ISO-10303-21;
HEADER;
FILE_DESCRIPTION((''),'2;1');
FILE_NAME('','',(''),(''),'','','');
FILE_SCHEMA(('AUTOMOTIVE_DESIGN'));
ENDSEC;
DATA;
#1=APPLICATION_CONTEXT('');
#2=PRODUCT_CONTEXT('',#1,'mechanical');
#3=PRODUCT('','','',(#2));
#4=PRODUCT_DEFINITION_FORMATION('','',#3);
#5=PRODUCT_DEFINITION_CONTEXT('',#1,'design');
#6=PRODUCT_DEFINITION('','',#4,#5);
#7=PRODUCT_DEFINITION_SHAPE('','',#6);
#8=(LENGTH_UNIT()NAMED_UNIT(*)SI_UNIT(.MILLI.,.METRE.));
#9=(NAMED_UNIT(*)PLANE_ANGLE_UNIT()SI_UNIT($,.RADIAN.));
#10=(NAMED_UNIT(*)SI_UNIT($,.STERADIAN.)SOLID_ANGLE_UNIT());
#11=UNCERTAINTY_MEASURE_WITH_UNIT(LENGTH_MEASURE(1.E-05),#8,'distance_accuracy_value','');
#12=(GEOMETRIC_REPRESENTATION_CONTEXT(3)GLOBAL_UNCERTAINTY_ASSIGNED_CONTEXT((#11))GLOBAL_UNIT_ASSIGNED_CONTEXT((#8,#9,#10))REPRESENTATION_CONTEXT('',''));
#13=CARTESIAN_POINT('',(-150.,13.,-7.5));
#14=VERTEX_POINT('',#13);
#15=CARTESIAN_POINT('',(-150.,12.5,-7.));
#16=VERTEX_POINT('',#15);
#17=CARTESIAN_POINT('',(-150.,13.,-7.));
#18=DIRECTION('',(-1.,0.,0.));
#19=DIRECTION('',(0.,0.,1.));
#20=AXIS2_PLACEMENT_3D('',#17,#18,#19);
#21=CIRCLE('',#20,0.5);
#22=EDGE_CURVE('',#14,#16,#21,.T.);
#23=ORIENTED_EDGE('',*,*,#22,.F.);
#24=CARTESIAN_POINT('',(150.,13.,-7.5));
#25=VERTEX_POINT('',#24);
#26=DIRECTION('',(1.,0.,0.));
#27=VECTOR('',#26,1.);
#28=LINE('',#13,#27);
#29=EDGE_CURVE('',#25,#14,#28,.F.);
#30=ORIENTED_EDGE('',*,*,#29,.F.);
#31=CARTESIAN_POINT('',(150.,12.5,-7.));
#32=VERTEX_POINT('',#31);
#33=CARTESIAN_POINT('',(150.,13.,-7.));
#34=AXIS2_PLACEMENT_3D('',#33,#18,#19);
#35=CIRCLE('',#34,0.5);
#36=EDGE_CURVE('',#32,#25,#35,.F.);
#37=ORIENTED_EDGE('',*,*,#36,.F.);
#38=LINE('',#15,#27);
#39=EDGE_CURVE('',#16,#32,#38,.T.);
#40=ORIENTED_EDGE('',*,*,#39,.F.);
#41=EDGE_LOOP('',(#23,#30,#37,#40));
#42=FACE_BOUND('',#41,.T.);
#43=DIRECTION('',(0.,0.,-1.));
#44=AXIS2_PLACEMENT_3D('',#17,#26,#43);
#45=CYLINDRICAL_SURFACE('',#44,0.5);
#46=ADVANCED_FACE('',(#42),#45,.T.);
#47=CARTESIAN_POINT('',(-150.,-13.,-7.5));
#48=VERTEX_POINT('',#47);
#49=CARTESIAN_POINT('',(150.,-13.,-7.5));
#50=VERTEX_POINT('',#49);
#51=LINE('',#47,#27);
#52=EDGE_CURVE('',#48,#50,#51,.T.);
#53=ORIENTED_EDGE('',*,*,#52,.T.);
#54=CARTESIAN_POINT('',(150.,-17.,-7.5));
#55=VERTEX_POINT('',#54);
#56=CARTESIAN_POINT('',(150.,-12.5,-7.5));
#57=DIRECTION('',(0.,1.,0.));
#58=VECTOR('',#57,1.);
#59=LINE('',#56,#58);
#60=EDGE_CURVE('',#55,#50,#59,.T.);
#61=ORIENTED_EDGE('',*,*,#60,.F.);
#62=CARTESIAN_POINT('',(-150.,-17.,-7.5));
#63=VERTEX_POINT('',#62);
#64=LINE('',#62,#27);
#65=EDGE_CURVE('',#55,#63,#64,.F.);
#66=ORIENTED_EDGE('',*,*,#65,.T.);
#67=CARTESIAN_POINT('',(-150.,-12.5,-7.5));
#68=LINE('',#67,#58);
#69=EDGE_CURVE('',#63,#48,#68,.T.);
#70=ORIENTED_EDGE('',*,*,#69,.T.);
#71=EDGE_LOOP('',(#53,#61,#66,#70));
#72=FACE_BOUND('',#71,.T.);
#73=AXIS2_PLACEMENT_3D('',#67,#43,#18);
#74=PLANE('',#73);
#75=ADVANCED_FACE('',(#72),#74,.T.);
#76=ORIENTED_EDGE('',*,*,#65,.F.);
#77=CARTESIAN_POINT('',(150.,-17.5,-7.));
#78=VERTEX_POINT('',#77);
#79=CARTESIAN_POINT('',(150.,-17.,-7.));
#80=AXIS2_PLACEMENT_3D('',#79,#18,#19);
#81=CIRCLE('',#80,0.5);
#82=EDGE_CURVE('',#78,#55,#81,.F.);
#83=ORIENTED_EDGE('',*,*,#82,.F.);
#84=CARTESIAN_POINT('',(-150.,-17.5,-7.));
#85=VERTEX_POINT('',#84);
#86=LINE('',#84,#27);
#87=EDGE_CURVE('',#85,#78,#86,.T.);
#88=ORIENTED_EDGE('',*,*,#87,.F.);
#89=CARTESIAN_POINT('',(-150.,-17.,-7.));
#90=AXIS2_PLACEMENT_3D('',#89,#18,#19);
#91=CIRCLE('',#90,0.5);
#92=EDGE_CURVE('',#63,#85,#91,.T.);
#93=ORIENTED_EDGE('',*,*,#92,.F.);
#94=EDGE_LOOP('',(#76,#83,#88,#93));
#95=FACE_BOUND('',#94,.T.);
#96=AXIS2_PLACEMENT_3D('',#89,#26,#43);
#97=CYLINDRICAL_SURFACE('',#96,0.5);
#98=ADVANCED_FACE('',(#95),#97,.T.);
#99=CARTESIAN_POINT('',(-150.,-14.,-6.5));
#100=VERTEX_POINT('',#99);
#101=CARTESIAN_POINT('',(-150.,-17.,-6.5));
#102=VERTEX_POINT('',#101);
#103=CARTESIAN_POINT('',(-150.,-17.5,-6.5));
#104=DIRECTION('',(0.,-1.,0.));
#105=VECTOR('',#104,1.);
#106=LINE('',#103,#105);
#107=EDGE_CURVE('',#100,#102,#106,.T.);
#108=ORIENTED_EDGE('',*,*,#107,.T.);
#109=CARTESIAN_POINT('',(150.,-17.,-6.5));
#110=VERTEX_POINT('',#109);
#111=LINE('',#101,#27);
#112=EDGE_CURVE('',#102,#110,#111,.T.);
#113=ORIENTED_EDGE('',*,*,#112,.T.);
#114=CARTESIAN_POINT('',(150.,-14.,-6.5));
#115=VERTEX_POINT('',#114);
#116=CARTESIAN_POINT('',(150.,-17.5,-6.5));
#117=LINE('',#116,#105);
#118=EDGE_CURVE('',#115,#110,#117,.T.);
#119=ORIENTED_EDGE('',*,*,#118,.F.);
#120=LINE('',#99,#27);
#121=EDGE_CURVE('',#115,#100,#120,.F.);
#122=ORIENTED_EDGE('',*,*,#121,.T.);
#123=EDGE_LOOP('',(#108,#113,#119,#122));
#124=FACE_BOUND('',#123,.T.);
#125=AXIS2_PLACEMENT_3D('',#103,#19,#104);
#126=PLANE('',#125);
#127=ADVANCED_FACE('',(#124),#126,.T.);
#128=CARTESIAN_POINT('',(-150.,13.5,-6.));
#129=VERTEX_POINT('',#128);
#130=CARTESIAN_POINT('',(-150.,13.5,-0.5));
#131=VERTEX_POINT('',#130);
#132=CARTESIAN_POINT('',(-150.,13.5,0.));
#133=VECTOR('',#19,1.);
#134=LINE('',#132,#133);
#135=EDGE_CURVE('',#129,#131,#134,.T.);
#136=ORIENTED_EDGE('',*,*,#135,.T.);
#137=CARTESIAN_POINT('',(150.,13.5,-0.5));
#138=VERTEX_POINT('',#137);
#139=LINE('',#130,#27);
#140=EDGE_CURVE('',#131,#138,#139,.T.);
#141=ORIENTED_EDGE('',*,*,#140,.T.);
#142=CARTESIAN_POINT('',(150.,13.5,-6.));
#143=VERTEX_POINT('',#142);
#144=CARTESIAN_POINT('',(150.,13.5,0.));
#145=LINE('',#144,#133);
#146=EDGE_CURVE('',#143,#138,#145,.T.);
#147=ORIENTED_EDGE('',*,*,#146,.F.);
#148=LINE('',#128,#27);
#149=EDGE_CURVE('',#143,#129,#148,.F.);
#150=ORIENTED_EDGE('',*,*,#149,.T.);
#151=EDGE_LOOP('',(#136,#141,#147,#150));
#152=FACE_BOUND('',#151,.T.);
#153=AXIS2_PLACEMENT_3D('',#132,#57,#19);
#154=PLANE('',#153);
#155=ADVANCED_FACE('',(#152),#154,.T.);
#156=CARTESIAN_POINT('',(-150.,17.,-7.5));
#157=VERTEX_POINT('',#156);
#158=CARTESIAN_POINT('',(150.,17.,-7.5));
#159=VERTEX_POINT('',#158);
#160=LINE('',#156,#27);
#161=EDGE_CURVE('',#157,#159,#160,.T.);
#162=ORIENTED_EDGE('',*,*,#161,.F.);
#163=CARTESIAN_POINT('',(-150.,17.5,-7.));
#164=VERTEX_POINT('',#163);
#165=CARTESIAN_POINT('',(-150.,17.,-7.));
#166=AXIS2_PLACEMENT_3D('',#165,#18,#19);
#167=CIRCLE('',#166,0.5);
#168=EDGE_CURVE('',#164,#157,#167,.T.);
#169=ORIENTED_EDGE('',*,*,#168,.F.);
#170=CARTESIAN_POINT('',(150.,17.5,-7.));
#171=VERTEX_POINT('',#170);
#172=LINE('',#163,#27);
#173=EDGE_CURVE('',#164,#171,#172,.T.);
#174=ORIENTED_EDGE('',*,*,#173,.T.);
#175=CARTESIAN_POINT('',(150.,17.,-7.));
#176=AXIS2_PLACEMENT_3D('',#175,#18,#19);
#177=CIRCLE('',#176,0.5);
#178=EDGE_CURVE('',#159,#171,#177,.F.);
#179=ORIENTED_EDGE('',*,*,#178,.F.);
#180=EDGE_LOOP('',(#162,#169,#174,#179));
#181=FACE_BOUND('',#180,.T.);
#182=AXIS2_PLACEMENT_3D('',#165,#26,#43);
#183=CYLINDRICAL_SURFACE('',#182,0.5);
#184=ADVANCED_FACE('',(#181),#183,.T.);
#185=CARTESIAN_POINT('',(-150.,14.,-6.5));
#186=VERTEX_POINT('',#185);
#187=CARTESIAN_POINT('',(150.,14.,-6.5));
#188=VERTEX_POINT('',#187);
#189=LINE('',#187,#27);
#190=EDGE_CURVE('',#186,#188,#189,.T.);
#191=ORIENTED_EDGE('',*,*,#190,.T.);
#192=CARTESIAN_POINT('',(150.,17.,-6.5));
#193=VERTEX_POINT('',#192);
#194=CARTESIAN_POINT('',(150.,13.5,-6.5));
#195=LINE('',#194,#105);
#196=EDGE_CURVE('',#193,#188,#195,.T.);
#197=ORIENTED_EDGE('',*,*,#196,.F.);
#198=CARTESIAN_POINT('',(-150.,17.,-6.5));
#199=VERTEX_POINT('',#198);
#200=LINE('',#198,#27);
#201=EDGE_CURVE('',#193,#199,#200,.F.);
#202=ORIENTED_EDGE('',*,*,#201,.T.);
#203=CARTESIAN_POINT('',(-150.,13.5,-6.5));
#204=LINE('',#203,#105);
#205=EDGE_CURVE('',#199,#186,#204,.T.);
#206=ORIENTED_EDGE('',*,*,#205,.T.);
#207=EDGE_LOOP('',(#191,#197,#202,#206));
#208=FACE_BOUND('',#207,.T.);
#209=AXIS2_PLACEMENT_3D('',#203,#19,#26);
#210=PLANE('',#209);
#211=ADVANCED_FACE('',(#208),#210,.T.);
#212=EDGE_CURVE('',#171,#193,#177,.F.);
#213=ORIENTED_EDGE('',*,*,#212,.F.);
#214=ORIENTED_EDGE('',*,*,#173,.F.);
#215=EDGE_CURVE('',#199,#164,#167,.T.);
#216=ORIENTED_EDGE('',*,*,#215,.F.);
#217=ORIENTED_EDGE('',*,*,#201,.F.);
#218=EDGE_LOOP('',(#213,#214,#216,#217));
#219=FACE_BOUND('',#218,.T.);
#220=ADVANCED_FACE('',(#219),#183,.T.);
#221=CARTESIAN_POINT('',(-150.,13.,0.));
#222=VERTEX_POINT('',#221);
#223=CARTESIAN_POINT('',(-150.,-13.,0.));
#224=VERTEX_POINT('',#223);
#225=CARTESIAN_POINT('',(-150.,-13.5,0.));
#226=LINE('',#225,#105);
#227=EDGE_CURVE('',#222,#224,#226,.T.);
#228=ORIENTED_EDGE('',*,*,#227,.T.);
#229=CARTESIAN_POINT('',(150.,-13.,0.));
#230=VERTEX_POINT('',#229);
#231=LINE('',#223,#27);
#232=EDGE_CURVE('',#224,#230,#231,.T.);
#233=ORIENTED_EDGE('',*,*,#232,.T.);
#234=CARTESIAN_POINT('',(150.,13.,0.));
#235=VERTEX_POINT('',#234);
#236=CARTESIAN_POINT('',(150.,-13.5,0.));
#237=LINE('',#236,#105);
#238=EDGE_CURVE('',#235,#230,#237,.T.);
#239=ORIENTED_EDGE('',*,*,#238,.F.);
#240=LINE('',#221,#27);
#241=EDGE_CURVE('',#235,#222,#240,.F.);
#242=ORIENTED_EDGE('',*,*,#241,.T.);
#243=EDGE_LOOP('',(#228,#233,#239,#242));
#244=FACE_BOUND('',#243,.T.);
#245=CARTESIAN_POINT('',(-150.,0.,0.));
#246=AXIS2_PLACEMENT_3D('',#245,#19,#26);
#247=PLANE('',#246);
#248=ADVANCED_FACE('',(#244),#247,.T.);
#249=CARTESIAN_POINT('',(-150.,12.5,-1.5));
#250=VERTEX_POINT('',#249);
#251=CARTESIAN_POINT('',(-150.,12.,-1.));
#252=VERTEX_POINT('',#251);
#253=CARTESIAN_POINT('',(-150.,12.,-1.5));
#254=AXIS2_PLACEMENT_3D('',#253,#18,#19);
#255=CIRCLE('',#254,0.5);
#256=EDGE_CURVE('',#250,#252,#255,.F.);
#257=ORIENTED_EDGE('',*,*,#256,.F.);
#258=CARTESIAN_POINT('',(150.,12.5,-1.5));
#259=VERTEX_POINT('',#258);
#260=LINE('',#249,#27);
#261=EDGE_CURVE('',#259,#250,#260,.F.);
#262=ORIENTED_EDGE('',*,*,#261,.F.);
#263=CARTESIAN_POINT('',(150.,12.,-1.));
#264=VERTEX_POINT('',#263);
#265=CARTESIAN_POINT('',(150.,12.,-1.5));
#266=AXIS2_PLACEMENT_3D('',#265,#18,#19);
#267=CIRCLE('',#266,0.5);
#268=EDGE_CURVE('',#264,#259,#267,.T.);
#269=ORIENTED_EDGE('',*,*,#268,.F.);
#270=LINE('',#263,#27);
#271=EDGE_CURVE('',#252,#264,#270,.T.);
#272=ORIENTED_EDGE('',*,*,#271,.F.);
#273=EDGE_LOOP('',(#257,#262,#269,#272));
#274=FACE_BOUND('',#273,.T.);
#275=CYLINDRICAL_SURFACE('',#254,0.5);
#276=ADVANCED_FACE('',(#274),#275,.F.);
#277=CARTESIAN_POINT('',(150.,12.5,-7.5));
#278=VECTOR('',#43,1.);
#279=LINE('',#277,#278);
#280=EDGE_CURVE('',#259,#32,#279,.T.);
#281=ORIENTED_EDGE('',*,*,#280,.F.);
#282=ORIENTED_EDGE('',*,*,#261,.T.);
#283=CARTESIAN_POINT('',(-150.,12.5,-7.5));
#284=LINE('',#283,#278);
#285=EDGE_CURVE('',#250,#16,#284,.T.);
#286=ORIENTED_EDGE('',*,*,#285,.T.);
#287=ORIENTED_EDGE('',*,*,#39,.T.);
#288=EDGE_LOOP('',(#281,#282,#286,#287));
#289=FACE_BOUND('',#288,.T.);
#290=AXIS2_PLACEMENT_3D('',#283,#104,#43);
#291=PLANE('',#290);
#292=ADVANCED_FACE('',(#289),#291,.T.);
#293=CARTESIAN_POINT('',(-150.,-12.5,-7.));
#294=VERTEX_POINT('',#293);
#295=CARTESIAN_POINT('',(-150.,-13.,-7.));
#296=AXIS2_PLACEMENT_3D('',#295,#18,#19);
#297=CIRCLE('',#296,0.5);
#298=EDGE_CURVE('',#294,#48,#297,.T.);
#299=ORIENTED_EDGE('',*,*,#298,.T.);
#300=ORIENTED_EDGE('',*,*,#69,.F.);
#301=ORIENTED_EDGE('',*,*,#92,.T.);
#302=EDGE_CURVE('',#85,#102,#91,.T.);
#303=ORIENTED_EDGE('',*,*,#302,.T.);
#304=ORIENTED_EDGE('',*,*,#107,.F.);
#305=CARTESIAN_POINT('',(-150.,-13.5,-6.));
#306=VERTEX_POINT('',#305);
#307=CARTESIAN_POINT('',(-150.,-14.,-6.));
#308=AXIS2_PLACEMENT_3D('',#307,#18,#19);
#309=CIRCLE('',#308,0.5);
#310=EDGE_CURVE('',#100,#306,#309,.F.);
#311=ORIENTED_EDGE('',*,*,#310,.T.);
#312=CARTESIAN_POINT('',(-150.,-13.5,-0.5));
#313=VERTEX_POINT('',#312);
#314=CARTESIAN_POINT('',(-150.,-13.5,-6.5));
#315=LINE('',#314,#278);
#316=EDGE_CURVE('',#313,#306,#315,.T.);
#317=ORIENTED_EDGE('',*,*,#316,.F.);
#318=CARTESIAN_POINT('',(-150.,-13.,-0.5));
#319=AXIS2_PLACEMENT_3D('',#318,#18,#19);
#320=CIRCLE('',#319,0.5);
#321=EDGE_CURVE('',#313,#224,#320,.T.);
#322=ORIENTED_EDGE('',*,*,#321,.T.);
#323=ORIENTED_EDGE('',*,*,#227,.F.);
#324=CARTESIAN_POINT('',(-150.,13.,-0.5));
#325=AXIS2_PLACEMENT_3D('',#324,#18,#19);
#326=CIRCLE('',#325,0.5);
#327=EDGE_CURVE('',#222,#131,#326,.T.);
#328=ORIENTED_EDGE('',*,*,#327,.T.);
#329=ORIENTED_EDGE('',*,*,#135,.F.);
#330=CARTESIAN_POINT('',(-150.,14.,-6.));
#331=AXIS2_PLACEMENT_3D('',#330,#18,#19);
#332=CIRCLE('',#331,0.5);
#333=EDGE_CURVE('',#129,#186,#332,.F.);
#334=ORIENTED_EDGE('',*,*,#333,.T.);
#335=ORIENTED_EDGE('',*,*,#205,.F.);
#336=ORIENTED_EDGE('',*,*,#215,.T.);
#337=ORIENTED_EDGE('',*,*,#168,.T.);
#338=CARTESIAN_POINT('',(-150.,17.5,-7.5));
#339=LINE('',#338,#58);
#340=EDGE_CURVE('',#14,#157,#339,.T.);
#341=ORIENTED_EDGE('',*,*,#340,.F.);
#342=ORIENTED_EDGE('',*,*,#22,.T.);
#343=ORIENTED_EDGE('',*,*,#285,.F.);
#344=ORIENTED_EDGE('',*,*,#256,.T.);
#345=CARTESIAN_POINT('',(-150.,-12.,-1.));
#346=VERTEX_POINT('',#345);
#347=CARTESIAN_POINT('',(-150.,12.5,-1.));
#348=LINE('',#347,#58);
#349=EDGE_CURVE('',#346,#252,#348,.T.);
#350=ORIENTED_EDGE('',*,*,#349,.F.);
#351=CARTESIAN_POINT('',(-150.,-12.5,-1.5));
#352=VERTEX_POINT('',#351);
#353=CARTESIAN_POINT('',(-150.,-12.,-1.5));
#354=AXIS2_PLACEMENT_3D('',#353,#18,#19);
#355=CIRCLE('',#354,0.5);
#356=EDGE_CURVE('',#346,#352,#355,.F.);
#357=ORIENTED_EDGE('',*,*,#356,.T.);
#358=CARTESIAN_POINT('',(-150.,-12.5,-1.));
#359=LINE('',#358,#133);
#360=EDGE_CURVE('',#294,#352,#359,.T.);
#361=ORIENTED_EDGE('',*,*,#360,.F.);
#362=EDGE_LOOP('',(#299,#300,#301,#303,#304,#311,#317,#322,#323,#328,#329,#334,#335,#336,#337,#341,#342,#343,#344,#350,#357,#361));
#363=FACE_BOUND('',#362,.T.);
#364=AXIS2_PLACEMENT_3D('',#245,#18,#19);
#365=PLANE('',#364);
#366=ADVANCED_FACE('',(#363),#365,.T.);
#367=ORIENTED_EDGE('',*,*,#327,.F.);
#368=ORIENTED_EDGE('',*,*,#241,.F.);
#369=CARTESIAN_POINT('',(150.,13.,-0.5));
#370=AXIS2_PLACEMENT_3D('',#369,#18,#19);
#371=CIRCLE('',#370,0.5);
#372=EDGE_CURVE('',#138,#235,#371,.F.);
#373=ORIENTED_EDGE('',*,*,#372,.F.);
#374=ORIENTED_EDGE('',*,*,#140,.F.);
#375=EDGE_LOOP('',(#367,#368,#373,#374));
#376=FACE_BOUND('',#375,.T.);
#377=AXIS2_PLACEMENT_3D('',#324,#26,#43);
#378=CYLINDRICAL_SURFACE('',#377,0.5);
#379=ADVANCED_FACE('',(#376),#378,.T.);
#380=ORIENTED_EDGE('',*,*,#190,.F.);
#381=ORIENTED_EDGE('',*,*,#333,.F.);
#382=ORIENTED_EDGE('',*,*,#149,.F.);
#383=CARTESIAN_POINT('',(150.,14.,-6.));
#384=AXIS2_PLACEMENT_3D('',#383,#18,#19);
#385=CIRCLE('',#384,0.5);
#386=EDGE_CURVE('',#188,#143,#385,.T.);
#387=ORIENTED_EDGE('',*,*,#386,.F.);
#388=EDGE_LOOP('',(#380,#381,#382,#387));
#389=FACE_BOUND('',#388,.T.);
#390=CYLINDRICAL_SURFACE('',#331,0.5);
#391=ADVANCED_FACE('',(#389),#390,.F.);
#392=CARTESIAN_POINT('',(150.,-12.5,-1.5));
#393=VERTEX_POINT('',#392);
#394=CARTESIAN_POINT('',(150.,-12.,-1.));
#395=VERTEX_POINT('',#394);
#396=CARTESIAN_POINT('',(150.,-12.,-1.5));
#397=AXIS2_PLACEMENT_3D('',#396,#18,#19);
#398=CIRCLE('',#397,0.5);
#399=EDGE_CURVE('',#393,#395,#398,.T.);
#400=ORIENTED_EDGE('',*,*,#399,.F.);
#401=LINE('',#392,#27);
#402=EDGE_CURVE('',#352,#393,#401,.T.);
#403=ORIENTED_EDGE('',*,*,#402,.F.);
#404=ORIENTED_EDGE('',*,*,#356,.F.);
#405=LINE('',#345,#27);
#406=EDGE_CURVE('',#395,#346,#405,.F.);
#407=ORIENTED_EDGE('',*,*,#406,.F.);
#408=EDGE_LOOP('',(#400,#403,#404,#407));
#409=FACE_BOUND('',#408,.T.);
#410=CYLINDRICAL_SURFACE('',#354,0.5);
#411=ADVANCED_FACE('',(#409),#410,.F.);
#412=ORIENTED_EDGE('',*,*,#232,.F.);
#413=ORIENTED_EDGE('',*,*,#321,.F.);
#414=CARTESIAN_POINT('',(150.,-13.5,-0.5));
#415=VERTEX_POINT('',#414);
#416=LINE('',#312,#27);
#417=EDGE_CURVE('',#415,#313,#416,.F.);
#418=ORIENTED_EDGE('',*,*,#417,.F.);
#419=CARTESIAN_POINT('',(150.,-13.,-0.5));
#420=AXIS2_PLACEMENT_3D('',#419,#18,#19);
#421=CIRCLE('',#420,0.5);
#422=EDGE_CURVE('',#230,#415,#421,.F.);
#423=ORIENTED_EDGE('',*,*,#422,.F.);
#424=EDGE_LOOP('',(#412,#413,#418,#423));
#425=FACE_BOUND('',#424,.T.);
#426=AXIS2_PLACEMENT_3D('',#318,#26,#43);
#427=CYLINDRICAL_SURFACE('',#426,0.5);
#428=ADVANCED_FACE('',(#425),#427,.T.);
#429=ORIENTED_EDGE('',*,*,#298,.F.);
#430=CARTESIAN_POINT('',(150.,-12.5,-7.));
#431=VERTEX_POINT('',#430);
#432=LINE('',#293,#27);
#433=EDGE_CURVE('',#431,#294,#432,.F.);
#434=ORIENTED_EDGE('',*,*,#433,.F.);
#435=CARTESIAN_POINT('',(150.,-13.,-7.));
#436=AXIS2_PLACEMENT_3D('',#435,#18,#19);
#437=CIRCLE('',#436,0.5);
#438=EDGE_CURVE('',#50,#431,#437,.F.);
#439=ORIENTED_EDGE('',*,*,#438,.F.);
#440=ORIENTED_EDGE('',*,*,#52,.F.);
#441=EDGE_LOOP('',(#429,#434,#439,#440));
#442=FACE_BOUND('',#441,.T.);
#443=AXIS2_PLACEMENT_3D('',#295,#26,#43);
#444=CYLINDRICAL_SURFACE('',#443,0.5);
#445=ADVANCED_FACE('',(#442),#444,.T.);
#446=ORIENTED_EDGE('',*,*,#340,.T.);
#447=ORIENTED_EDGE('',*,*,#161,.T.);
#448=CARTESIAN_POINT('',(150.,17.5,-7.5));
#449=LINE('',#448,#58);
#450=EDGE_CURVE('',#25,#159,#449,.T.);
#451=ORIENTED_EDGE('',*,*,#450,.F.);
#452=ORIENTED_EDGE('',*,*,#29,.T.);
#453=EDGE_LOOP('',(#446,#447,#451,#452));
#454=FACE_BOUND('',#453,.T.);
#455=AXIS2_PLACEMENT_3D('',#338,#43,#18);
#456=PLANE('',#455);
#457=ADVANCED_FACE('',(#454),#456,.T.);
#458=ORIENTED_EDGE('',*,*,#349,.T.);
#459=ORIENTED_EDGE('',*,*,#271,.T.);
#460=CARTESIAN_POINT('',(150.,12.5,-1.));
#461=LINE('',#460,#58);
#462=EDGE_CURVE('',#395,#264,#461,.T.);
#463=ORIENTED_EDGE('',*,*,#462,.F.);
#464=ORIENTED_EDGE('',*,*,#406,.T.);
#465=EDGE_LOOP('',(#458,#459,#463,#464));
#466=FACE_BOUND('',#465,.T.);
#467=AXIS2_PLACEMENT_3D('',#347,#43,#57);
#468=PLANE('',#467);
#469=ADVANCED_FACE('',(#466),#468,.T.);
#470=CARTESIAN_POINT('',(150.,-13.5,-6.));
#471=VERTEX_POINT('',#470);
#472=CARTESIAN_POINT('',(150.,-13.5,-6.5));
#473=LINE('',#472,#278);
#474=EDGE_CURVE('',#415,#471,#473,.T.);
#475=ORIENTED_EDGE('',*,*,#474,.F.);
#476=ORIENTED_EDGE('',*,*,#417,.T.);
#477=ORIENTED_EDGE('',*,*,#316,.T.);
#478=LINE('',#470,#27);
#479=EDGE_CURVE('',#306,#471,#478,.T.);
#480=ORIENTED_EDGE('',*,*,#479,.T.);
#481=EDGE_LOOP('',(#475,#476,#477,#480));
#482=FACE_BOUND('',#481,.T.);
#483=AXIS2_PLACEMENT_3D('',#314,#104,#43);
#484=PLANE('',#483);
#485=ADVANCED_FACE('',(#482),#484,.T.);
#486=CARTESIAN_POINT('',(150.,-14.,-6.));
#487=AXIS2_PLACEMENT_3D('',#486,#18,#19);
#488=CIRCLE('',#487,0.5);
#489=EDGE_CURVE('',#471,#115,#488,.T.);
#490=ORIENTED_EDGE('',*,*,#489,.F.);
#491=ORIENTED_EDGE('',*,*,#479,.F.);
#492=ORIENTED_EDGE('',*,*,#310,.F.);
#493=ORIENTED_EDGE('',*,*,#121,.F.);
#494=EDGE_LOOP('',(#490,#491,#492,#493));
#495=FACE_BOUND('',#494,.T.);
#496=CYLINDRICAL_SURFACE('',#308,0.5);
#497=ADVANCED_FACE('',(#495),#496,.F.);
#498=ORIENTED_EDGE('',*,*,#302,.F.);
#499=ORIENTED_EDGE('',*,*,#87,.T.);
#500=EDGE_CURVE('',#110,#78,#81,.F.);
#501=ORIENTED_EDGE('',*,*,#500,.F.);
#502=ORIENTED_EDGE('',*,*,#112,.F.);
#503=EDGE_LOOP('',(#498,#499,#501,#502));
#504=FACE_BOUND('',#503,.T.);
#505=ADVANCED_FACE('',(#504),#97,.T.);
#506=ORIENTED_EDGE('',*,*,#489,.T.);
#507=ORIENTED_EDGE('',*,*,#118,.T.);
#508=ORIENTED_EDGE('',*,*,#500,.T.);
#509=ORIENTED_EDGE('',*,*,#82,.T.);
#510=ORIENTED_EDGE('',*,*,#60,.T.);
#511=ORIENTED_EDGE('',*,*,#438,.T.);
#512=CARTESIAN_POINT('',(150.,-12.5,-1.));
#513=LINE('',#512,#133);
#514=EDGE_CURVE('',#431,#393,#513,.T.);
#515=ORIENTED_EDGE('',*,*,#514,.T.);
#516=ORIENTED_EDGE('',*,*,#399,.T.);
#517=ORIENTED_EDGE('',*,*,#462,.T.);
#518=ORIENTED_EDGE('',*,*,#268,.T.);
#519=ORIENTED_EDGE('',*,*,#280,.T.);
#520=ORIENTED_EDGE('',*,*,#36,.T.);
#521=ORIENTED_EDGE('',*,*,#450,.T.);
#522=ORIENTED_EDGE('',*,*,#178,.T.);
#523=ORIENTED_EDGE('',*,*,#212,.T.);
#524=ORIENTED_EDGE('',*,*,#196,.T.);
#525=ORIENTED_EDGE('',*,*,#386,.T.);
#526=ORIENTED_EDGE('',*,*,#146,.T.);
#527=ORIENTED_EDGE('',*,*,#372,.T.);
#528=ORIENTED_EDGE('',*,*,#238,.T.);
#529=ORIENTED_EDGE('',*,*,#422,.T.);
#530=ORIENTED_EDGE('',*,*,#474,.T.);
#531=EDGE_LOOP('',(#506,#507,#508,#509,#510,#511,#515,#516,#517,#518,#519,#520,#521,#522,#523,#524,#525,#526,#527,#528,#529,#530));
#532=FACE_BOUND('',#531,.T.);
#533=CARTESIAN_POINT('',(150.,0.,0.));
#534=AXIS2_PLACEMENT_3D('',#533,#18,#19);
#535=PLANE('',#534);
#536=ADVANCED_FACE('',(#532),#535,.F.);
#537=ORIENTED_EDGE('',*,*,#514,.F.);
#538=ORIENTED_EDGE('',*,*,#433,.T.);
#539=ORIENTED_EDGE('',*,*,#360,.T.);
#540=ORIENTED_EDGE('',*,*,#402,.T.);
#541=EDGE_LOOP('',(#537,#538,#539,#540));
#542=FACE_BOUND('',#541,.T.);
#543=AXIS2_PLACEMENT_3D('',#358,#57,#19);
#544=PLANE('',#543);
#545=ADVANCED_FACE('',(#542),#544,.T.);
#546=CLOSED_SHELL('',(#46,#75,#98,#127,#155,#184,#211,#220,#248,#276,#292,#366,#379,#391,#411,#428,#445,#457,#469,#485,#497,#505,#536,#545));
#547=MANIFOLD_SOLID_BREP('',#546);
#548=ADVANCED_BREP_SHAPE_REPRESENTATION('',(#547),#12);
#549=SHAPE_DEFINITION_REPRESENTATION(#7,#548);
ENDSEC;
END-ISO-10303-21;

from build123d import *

# Parameters (mm, degrees)
SALIENTE_EXTRUIR1_DEPTH      = 150
SALIENTE_EXTRUIR1_DEPTH_BACK = 150
REDONDEO1_R                  = 0.5


with BuildPart() as part:
    # Croquis1 → Saliente-Extruir1 (new, two sides: drawn at the far end of the back side and taken through both)
    with BuildSketch(Plane(origin=(0, 0, 0), x_dir=(0, 0, -1), z_dir=(1, 0, 0)).offset(-SALIENTE_EXTRUIR1_DEPTH_BACK)):
        Polygon((0, 0), (0, 13.5), (6.5, 13.5), (6.5, 17.5), (7.5, 17.5), (7.5, 12.5), (1, 12.5), (1, -12.5), (7.5, -12.5), (7.5, -17.5), (6.5, -17.5), (6.5, -13.5), (0, -13.5), align=None)
    extrude(amount=SALIENTE_EXTRUIR1_DEPTH + SALIENTE_EXTRUIR1_DEPTH_BACK)

    # Redondeo1
    redondeo1_edges = [part.edges().sort_by_distance(p)[0] for p in [
        (0, 12.5, -1),
        (0, 12.5, -7.5),
        (0, 17.5, -7.5),
        (0, 17.5, -6.5),
        (0, 13.5, 0),
        (0, 13.5, -6.5),
        (0, -13.5, 0),
        (0, -13.5, -6.5),
        (0, -17.5, -6.5),
        (0, -17.5, -7.5),
        (0, -12.5, -7.5),
        (0, -12.5, -1),
    ]]
    fillet(redondeo1_edges, radius=REDONDEO1_R - 0.0001)  # a hair under: the kernel refuses the full size


solid = part.part
